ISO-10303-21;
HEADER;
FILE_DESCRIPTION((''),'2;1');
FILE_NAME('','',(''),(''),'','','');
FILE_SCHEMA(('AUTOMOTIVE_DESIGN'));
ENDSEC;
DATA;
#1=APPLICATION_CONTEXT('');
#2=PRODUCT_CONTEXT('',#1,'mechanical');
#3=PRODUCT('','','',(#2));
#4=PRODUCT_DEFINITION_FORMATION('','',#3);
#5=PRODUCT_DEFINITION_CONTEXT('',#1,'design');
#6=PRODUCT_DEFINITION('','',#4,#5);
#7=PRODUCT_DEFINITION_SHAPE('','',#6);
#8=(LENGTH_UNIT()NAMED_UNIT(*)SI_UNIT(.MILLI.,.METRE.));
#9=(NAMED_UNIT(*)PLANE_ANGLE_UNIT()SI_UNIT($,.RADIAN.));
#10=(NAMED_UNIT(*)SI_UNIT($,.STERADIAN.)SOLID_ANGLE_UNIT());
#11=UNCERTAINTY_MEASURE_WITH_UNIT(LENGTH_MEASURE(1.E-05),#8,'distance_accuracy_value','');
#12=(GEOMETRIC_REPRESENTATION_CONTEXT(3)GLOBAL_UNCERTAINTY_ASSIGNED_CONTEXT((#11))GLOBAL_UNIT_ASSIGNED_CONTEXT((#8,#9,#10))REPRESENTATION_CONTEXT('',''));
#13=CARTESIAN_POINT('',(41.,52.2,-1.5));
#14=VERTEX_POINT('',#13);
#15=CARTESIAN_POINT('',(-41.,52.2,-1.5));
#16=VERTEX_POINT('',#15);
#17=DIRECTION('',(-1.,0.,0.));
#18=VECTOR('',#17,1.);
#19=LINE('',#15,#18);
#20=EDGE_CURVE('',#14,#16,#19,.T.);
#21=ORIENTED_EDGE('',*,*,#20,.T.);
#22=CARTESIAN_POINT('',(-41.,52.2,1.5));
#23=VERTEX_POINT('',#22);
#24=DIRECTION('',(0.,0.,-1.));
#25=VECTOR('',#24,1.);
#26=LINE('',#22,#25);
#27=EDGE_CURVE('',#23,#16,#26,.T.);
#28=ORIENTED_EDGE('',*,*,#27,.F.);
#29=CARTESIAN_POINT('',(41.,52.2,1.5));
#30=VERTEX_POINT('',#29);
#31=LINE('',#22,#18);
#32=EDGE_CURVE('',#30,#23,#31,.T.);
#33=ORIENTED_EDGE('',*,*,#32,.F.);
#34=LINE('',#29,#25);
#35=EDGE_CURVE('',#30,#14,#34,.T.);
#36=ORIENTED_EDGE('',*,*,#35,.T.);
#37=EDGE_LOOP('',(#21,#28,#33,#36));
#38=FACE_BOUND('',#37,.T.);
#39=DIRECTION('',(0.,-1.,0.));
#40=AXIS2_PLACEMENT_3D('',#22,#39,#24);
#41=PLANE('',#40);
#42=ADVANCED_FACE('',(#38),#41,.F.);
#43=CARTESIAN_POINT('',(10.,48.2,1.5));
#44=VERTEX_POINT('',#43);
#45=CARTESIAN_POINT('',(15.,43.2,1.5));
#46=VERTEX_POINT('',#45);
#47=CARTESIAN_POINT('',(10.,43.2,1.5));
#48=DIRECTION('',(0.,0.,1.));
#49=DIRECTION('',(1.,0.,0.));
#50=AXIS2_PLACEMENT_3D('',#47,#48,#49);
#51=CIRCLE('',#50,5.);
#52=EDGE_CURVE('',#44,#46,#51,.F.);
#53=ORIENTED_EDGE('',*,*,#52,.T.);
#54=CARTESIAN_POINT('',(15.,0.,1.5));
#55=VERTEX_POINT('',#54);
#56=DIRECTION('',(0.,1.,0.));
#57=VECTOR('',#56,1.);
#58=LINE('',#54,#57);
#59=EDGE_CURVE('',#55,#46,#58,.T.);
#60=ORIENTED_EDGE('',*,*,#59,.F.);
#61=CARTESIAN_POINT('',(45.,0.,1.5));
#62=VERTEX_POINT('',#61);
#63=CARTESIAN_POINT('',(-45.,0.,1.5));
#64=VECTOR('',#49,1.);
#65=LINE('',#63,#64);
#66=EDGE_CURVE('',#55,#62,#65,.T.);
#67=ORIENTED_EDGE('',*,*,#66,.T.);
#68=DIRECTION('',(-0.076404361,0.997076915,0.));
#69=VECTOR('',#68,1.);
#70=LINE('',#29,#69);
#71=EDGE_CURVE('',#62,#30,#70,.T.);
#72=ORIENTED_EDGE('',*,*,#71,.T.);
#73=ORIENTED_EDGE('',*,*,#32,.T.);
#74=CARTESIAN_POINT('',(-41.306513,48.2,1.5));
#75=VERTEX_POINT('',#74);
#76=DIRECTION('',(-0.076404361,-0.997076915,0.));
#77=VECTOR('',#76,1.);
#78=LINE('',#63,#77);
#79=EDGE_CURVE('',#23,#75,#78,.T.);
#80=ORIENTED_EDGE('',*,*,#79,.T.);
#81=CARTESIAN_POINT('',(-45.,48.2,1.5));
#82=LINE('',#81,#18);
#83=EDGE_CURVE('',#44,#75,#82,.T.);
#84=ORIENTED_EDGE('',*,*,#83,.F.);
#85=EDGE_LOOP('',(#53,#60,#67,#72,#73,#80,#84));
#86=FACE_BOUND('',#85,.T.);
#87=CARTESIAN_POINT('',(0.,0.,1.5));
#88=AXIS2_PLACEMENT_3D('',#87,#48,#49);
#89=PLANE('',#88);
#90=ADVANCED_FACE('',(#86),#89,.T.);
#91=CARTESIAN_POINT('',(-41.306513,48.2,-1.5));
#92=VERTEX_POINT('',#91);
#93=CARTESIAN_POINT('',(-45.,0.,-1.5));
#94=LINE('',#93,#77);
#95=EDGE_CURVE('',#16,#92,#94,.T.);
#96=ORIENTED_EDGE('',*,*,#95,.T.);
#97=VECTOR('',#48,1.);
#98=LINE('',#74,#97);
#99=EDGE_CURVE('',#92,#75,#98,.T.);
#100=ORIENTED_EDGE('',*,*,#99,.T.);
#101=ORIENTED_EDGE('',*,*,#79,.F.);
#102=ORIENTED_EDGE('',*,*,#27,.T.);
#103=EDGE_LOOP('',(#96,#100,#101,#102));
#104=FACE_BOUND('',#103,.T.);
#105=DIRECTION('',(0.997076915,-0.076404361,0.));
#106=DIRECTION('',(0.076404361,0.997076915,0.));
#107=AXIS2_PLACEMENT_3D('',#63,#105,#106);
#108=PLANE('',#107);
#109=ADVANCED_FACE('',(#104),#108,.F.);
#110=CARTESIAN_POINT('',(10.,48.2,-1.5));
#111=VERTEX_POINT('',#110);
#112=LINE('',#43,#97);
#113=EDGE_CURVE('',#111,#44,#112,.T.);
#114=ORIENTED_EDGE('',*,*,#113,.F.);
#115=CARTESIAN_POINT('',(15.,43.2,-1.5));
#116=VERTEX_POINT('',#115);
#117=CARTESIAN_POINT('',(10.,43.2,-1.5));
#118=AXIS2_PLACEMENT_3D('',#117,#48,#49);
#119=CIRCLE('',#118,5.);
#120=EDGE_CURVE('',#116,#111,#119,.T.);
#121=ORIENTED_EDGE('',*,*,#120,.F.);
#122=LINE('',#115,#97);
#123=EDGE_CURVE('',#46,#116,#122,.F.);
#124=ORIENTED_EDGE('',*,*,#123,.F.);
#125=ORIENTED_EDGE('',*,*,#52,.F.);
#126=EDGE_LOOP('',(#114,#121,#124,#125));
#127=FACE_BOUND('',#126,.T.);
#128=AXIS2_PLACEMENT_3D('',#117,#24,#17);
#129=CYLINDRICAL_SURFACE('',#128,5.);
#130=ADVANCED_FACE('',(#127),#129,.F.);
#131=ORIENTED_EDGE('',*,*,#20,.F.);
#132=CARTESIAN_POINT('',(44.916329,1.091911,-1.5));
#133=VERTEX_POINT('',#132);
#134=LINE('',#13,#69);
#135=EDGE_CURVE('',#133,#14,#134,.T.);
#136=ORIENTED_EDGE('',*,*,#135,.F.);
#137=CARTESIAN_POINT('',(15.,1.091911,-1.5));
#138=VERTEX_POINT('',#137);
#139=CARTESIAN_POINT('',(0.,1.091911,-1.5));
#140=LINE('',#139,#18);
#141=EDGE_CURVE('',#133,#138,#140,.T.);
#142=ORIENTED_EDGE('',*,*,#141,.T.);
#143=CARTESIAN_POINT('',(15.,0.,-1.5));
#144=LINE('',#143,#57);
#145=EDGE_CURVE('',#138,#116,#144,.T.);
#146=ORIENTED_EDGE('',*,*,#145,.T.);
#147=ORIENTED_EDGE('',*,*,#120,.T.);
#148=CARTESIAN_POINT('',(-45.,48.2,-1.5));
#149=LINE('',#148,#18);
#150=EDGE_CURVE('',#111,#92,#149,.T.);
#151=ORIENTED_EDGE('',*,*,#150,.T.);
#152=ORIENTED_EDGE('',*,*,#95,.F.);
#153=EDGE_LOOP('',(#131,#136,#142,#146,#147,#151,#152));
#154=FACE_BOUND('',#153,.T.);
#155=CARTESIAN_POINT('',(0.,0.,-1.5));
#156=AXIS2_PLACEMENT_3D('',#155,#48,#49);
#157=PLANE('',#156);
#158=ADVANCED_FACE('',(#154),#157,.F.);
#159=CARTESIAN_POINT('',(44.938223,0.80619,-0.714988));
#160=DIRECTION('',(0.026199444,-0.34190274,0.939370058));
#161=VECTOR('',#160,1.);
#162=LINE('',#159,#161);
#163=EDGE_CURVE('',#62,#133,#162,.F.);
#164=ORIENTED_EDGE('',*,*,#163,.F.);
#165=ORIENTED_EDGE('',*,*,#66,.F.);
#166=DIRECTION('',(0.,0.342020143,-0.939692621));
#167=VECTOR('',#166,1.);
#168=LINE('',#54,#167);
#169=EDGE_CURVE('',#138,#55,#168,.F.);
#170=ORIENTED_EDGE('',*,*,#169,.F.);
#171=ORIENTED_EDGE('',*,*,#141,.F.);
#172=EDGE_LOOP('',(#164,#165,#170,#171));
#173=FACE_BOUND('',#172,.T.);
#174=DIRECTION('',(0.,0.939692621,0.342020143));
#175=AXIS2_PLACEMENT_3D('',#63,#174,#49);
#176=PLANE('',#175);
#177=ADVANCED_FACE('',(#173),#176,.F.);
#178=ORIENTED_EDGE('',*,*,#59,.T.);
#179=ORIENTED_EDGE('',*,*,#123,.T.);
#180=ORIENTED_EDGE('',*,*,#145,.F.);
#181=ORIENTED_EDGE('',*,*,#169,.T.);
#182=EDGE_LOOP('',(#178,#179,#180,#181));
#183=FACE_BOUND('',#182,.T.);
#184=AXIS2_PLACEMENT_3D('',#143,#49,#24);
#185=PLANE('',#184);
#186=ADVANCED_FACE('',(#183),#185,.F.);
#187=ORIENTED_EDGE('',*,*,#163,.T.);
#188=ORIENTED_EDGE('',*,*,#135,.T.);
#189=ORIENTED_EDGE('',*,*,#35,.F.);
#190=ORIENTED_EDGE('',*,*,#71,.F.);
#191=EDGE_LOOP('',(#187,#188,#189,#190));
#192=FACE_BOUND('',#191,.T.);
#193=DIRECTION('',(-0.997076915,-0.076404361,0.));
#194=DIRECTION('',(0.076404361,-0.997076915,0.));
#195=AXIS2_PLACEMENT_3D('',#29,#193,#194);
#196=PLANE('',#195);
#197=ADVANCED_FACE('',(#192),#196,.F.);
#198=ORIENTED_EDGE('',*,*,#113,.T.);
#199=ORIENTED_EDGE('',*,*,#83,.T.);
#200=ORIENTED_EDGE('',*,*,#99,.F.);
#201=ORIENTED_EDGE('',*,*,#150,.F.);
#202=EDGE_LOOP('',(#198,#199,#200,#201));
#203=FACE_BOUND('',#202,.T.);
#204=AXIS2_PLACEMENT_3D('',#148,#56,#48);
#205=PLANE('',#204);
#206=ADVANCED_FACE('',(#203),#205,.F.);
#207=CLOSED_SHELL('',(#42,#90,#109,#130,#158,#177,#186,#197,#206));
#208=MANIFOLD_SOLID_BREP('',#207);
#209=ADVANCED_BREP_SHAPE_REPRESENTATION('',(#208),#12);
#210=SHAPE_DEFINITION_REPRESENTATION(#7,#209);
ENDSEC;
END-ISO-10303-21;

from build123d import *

# Parameters (mm, degrees)
BOSS_EXTRUDE1_DEPTH = 1.5
CHAMFER1_SIZE2      = 1.091910703
CHAMFER1_SIZE       = 3
SKETCH3_W           = 60
SKETCH3_H           = 48.2
CUT_EXTRUDE2_DEPTH  = 69.98434605
FILLET1_R           = 5


with BuildPart() as part:
    # Sketch1 → Boss-Extrude1 (new, symmetric)
    with BuildSketch(Plane.XY):
        Polygon((-45, 0), (45, 0), (41, 52.2), (-41, 52.2), align=None)
    extrude(amount=BOSS_EXTRUDE1_DEPTH, both=True)

    # Chamfer1
    chamfer1_edges = [part.edges().sort_by_distance(p)[0] for p in [
        (0, 0, -1.5),
    ]]
    chamfer1_side = [part.faces().sort_by_distance(p)[0] for p in [
        (0, 0, -1.478161786),
    ]]
    chamfer(chamfer1_edges, length=CHAMFER1_SIZE - 0.0001, length2=CHAMFER1_SIZE2 - 0.0001, reference=chamfer1_side[0])  # a hair under: the kernel refuses the full size

    # Sketch3 → Cut-Extrude2 (cut, through all)
    with BuildSketch(Plane.XY.offset(1.5)):
        with Locations((-15, 24.1)):
            Rectangle(SKETCH3_W, SKETCH3_H)
    extrude(amount=-CUT_EXTRUDE2_DEPTH, mode=Mode.SUBTRACT)

    # Fillet1
    fillet1_edges = [part.edges().sort_by_distance(p)[0] for p in [
        (15, 48.2, 0),
    ]]
    fillet(fillet1_edges, radius=FILLET1_R)


solid = part.part
